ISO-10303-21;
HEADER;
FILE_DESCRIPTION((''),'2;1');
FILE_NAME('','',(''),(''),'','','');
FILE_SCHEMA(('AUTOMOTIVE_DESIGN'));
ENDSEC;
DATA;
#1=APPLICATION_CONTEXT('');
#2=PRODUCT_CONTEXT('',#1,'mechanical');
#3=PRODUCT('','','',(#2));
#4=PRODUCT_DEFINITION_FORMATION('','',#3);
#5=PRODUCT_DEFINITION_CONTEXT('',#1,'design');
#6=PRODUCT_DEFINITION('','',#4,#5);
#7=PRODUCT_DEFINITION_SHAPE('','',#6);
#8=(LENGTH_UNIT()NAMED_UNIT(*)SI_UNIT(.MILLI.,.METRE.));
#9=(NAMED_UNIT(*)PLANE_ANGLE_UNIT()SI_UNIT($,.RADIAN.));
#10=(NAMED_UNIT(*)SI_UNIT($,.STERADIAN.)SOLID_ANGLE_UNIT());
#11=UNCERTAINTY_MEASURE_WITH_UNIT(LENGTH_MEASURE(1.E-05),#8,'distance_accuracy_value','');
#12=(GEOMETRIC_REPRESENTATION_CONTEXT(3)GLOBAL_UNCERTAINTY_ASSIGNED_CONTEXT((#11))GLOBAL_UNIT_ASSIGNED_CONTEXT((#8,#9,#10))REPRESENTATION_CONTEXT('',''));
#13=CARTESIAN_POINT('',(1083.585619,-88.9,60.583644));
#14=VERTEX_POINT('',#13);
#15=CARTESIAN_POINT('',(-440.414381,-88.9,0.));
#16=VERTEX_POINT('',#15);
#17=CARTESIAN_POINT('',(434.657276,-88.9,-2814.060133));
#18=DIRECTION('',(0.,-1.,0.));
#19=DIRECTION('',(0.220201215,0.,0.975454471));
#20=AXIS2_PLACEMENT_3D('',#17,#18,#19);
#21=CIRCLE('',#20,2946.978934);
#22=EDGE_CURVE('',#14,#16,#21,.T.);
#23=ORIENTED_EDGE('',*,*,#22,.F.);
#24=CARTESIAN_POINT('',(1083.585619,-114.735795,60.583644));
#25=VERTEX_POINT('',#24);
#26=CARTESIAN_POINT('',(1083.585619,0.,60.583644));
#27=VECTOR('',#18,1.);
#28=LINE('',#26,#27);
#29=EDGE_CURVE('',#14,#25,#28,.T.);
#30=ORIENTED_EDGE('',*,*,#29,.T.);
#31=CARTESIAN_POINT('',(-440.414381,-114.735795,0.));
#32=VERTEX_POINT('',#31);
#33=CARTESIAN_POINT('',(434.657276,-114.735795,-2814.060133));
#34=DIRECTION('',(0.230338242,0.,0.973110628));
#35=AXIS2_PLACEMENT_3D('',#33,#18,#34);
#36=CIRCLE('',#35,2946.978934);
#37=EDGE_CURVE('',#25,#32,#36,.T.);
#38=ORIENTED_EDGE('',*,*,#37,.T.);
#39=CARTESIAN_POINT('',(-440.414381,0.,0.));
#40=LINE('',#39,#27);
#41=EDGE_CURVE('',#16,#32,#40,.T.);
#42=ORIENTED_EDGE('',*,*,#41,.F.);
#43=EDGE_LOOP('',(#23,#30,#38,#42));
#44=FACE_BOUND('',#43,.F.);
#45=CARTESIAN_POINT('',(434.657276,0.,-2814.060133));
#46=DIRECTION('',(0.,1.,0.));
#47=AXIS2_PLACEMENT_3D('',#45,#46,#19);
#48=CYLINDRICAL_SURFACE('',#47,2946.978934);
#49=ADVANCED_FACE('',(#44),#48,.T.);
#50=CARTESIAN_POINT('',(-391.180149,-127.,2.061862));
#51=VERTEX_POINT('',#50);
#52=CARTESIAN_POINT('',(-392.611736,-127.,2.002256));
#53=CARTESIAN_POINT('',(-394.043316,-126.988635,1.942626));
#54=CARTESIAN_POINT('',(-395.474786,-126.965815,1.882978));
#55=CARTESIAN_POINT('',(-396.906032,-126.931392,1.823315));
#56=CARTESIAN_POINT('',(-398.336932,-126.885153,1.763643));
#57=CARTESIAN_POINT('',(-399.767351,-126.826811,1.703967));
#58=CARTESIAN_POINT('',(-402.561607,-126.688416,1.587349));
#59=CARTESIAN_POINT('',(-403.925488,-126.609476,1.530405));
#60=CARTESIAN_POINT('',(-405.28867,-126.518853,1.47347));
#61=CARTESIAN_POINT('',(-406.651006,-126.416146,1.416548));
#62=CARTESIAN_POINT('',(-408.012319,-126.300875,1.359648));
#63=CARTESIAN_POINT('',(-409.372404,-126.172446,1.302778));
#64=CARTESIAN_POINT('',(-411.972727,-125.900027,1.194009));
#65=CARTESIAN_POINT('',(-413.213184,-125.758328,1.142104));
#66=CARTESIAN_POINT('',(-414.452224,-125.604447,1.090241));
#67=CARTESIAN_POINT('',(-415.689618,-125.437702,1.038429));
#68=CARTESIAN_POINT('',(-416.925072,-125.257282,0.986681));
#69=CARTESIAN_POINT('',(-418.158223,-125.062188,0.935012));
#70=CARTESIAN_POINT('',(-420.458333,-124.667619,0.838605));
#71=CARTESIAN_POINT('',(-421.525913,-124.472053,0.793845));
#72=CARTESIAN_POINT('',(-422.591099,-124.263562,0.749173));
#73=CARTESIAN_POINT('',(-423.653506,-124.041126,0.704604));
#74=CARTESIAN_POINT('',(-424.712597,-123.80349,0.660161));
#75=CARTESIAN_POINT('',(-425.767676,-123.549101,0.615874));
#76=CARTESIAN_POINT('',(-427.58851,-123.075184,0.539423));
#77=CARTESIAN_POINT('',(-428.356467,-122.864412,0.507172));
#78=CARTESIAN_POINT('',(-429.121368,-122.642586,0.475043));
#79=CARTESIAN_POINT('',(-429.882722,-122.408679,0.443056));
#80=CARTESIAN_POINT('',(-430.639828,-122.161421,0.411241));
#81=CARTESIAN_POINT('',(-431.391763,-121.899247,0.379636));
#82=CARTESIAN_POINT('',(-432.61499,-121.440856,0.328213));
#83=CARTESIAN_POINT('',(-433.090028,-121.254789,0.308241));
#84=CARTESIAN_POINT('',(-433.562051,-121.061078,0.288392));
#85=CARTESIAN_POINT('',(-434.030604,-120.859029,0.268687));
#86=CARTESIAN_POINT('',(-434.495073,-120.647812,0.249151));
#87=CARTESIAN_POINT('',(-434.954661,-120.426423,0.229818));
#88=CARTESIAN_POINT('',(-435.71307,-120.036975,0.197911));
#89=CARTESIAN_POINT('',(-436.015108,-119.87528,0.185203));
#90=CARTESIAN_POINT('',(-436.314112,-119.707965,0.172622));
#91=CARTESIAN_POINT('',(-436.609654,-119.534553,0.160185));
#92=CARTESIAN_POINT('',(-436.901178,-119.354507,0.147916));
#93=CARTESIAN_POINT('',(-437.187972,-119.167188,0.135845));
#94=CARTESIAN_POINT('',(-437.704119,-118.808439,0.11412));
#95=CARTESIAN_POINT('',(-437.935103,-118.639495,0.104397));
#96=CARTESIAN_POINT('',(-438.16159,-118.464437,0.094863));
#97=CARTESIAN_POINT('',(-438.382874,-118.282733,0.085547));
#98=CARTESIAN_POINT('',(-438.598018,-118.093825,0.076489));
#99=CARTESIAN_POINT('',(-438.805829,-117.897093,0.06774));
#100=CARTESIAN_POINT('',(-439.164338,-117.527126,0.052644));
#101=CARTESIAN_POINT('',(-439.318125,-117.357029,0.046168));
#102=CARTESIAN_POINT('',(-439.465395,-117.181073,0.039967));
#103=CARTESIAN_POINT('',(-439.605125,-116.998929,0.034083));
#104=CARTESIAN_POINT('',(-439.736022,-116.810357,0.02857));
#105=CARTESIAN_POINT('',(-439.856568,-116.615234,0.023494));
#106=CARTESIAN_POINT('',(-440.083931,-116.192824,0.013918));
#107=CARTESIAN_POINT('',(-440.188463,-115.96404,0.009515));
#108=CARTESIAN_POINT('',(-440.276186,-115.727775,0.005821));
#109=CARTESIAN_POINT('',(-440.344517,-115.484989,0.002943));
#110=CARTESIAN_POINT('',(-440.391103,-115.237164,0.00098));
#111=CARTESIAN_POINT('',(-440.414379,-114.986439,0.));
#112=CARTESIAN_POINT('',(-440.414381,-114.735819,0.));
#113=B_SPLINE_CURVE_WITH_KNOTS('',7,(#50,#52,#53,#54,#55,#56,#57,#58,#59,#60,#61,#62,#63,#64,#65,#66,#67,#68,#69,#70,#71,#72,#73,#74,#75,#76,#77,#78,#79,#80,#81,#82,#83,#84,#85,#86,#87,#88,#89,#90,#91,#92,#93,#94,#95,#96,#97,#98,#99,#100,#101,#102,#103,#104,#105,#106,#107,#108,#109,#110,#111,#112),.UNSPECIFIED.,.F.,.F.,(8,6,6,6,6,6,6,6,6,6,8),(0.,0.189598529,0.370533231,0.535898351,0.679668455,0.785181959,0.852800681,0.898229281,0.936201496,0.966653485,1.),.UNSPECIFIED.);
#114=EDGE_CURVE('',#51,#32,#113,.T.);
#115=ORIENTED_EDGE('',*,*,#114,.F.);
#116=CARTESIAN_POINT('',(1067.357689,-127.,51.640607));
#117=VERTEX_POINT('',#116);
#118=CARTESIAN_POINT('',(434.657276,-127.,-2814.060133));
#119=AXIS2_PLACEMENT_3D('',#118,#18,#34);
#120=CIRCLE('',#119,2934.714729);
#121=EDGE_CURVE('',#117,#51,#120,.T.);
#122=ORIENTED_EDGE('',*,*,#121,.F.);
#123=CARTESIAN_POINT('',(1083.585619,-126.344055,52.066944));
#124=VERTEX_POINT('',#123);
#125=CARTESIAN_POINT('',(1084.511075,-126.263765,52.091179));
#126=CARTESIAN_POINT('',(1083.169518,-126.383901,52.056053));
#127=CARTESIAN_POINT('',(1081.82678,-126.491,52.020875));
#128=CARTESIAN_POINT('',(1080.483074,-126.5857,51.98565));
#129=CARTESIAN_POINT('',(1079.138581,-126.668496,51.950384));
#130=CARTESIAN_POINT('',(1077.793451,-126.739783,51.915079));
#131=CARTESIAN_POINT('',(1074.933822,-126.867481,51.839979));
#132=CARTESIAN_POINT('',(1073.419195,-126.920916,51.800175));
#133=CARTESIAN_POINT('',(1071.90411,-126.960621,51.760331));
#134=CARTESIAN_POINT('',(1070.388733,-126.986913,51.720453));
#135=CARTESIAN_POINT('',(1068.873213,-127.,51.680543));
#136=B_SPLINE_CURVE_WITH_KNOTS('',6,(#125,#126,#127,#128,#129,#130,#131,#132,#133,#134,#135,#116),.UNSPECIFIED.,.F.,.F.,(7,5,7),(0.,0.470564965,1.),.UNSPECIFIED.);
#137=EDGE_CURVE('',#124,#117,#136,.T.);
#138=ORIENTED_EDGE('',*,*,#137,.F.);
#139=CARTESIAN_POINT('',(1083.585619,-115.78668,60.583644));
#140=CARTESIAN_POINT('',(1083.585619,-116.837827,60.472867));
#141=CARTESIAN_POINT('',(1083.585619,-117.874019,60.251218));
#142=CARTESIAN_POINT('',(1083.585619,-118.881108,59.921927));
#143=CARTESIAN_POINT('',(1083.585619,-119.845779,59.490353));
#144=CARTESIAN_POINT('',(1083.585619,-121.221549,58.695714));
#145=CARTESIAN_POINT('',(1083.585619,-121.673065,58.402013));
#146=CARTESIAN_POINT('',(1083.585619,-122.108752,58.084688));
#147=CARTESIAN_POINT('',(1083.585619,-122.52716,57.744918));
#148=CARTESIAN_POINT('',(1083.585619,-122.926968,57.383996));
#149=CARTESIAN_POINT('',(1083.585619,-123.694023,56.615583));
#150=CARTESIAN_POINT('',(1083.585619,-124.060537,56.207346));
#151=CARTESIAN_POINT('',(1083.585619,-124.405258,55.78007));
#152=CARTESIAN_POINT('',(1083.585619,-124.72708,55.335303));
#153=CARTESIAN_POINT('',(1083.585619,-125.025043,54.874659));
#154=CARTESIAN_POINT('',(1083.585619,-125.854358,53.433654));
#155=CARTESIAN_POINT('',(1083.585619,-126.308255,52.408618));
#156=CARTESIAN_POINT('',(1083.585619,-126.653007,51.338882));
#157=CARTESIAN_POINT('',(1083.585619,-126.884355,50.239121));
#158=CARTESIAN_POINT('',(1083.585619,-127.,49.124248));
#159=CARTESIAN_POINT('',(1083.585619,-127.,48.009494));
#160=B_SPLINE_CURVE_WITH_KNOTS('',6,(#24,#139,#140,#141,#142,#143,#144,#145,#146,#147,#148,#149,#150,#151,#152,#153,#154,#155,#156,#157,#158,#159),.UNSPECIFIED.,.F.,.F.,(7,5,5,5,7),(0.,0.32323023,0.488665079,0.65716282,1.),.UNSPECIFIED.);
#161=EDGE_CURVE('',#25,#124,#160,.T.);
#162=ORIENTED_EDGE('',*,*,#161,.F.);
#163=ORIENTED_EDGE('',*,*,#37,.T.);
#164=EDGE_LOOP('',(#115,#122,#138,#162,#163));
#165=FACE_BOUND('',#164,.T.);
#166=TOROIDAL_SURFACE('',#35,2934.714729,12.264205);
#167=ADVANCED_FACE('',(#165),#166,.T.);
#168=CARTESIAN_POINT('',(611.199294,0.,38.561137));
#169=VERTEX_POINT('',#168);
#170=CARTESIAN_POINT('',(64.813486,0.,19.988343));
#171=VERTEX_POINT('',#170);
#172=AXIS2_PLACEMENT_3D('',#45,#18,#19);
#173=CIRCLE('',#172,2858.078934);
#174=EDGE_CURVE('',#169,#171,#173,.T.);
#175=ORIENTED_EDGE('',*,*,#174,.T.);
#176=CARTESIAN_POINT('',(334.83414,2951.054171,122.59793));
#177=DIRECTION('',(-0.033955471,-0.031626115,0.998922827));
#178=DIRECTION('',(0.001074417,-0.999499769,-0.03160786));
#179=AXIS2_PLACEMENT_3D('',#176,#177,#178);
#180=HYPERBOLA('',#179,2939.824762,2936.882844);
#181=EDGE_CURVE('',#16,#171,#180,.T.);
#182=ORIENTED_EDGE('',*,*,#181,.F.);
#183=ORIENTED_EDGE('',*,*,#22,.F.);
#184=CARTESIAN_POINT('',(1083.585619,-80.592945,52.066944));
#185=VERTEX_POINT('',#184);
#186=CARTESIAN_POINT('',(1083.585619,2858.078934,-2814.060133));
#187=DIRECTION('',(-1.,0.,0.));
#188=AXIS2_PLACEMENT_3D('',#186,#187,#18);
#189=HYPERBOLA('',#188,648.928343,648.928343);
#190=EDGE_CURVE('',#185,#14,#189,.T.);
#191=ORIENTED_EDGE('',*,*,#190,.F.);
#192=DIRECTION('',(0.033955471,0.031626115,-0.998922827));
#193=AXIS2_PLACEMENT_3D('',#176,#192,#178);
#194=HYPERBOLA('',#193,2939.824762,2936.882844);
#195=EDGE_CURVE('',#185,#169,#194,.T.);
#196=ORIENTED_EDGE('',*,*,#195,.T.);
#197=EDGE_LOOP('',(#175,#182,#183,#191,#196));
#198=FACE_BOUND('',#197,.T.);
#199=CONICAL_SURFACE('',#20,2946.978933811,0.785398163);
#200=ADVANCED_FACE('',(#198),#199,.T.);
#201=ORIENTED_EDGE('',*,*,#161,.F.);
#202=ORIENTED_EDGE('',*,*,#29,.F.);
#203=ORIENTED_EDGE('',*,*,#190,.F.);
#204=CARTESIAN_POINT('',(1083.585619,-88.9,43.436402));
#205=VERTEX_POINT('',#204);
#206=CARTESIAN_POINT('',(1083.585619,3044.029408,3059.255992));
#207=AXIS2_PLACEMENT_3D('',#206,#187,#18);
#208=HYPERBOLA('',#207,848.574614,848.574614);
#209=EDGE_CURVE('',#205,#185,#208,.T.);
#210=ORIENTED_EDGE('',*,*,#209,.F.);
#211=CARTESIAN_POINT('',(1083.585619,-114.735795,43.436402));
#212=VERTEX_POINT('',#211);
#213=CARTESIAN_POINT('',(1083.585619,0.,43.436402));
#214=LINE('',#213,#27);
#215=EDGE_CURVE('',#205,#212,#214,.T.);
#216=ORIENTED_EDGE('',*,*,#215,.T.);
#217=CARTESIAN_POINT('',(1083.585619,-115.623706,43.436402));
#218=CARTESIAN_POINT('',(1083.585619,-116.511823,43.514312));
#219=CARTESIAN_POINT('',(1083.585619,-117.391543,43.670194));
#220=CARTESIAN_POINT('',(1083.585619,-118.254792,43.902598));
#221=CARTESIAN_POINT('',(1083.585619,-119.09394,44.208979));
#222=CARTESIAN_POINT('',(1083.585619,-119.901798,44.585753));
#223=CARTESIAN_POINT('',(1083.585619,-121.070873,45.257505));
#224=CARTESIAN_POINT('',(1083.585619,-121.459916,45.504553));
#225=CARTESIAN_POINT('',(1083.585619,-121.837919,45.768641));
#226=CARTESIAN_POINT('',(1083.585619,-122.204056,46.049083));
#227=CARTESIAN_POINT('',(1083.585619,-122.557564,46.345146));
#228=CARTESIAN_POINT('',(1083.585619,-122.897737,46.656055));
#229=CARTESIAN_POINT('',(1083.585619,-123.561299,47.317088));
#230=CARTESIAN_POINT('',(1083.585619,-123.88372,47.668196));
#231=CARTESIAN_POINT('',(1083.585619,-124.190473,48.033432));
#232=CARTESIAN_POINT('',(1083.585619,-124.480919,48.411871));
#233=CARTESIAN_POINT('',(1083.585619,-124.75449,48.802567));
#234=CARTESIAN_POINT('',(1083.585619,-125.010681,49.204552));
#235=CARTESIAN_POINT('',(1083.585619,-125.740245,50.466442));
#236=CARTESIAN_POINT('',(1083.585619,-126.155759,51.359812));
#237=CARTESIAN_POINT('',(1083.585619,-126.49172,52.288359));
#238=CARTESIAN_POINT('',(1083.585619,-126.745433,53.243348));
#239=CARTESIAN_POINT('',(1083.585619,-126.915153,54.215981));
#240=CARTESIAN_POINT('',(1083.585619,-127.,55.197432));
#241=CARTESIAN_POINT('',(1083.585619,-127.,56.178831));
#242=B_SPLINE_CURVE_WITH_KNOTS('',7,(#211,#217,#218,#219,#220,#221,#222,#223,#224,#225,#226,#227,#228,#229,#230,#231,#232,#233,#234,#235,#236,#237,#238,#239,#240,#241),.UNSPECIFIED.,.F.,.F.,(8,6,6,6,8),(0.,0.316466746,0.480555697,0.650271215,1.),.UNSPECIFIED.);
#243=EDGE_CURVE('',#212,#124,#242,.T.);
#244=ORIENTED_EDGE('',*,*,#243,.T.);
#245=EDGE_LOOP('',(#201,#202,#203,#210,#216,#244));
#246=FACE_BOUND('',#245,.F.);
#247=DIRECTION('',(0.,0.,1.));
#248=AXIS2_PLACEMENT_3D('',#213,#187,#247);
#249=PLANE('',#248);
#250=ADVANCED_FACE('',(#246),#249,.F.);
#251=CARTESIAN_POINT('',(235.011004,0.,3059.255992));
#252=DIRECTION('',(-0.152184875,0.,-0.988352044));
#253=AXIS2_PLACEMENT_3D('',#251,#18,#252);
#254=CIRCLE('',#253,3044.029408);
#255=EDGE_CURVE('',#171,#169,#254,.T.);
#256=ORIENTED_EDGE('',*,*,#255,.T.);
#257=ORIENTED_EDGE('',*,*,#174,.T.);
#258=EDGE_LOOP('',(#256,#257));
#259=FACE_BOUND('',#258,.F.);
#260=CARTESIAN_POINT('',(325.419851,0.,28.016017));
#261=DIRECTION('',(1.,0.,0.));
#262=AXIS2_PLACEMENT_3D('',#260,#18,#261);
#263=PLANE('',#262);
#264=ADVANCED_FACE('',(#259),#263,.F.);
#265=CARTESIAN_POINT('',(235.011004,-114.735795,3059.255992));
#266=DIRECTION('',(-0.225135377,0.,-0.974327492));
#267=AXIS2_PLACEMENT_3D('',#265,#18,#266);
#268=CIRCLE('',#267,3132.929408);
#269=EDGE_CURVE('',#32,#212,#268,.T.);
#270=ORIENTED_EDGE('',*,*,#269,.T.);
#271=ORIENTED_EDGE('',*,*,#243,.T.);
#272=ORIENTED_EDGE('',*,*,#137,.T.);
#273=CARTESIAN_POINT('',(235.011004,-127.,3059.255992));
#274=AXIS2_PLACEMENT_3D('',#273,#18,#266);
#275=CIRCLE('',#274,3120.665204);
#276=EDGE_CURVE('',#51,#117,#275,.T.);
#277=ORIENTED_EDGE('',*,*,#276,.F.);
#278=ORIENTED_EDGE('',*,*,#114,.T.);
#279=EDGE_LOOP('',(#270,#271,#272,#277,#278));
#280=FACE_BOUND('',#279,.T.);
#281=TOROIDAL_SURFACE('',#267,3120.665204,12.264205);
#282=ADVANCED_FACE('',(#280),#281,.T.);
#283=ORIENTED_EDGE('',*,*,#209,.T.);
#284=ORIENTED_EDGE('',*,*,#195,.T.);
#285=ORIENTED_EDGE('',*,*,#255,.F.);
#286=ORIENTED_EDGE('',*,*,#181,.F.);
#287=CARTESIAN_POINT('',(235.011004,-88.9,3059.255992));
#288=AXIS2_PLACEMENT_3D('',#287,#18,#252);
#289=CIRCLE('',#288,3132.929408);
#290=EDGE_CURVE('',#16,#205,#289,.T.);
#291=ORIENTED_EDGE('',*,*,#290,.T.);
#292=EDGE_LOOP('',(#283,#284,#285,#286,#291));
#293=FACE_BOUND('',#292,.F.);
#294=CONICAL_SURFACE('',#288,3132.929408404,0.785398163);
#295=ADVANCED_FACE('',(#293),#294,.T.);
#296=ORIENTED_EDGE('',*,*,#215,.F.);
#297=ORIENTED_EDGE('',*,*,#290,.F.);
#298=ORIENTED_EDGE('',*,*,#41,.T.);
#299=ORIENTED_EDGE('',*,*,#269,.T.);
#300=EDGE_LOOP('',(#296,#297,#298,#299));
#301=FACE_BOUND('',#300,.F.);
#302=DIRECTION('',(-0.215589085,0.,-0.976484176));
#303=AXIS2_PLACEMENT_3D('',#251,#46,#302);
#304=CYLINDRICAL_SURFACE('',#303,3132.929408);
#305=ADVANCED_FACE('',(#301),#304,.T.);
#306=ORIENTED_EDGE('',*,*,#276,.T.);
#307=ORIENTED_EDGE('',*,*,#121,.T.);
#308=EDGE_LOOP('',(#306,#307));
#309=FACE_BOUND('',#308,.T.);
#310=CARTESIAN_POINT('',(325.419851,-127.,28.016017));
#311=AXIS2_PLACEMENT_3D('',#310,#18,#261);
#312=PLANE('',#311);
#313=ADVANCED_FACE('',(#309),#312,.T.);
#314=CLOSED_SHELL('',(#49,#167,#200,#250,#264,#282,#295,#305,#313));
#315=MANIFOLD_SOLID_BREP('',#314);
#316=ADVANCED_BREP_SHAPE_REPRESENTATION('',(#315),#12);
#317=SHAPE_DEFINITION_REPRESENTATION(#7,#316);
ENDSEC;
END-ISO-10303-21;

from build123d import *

# Parameters (mm, degrees)
F1_DEPTH    = 127
F2_T2_ANGLE = 31.186938852
F2_T4_ANGLE = 29.2868339597
F3_C1_SIZE  = 88.9
F3_C2_SIZE  = 88.9


# Not quite as in the source:
# - a fillet or chamfer that OpenCascade refuses, or shapes differently, is made with other operations: its cross-section is extruded or revolved along the edge and cut away or added


with BuildPart() as f1:
    # F0 (on Front) → F1 (new body)
    with BuildSketch(Plane.XZ):
        with BuildLine():
            Line((1083.5856187426, 43.4364019366), (1083.5856187426, 60.5836437908))
            ThreePointArc((1083.5856187426, 60.5836437908), (317.5983414893, 130.5929948501), (-440.4143812574, 0))
            ThreePointArc((-440.4143812574, 0), (324.2681839508, -72.4016891466), (1083.5856187426, 43.4364019366))
        make_face()
    extrude(amount=F1_DEPTH)

    # F2: fillet of radius 12.2642048969 on 3 edges, made by hand

    # F2_s1 → F2_t2 (revolve, cut)
    with BuildSketch(Plane(origin=(1042.3525858454, 0, -246.7280237768), x_dir=(0, 1, 0), z_dir=(0.973110628, 0, -0.230338242))):
        with BuildLine():
            ThreePointArc((-114.7357951031, 308.7053036416), (-123.4078975516, 305.1132011932), (-127, 296.4410987447))
            Line((-127, 296.4410987447), (-127, 308.7053036416))
            Line((-127, 308.7053036416), (-114.7357951031, 308.7053036416))
        make_face()
    revolve(axis=Axis((434.657275986, -127, -2814.0601328001), (0, -1, 0)), revolution_arc=F2_T2_ANGLE, mode=Mode.SUBTRACT)

    # F2_s3 → F2_t4 (revolve, cut)
    with BuildSketch(Plane(origin=(-447.9656433365, 0, 103.5102824727), x_dir=(0, 1, 0), z_dir=(-0.9743274922, 0, 0.2251353769))):
        with BuildLine():
            ThreePointArc((-114.7357951031, 99.3028983442), (-123.4078975516, 95.7107958958), (-127, 87.0386934473))
            Line((-127, 87.0386934473), (-127, 99.3028983442))
            Line((-127, 99.3028983442), (-114.7357951031, 99.3028983442))
        make_face()
    revolve(axis=Axis((235.0110043049, -127, 3059.2559923266), (0, -1, 0)), revolution_arc=F2_T4_ANGLE, mode=Mode.SUBTRACT)

    # F3: chamfer of 88.9 on 2 edges, made by hand

    # F3_c1
    f3_c1_edges = [f1.edges().sort_by_distance(p)[0] for p in [
        (317.5983414893, 0, 130.5929948501),
    ]]
    chamfer(f3_c1_edges, length=F3_C1_SIZE)

    # F3_c2
    f3_c2_edges = [f1.edges().sort_by_distance(p)[0] for p in [
        (341.4443406907, 0, -71.8649927128),
    ]]
    chamfer(f3_c2_edges, length=F3_C2_SIZE)


solid = f1.part
